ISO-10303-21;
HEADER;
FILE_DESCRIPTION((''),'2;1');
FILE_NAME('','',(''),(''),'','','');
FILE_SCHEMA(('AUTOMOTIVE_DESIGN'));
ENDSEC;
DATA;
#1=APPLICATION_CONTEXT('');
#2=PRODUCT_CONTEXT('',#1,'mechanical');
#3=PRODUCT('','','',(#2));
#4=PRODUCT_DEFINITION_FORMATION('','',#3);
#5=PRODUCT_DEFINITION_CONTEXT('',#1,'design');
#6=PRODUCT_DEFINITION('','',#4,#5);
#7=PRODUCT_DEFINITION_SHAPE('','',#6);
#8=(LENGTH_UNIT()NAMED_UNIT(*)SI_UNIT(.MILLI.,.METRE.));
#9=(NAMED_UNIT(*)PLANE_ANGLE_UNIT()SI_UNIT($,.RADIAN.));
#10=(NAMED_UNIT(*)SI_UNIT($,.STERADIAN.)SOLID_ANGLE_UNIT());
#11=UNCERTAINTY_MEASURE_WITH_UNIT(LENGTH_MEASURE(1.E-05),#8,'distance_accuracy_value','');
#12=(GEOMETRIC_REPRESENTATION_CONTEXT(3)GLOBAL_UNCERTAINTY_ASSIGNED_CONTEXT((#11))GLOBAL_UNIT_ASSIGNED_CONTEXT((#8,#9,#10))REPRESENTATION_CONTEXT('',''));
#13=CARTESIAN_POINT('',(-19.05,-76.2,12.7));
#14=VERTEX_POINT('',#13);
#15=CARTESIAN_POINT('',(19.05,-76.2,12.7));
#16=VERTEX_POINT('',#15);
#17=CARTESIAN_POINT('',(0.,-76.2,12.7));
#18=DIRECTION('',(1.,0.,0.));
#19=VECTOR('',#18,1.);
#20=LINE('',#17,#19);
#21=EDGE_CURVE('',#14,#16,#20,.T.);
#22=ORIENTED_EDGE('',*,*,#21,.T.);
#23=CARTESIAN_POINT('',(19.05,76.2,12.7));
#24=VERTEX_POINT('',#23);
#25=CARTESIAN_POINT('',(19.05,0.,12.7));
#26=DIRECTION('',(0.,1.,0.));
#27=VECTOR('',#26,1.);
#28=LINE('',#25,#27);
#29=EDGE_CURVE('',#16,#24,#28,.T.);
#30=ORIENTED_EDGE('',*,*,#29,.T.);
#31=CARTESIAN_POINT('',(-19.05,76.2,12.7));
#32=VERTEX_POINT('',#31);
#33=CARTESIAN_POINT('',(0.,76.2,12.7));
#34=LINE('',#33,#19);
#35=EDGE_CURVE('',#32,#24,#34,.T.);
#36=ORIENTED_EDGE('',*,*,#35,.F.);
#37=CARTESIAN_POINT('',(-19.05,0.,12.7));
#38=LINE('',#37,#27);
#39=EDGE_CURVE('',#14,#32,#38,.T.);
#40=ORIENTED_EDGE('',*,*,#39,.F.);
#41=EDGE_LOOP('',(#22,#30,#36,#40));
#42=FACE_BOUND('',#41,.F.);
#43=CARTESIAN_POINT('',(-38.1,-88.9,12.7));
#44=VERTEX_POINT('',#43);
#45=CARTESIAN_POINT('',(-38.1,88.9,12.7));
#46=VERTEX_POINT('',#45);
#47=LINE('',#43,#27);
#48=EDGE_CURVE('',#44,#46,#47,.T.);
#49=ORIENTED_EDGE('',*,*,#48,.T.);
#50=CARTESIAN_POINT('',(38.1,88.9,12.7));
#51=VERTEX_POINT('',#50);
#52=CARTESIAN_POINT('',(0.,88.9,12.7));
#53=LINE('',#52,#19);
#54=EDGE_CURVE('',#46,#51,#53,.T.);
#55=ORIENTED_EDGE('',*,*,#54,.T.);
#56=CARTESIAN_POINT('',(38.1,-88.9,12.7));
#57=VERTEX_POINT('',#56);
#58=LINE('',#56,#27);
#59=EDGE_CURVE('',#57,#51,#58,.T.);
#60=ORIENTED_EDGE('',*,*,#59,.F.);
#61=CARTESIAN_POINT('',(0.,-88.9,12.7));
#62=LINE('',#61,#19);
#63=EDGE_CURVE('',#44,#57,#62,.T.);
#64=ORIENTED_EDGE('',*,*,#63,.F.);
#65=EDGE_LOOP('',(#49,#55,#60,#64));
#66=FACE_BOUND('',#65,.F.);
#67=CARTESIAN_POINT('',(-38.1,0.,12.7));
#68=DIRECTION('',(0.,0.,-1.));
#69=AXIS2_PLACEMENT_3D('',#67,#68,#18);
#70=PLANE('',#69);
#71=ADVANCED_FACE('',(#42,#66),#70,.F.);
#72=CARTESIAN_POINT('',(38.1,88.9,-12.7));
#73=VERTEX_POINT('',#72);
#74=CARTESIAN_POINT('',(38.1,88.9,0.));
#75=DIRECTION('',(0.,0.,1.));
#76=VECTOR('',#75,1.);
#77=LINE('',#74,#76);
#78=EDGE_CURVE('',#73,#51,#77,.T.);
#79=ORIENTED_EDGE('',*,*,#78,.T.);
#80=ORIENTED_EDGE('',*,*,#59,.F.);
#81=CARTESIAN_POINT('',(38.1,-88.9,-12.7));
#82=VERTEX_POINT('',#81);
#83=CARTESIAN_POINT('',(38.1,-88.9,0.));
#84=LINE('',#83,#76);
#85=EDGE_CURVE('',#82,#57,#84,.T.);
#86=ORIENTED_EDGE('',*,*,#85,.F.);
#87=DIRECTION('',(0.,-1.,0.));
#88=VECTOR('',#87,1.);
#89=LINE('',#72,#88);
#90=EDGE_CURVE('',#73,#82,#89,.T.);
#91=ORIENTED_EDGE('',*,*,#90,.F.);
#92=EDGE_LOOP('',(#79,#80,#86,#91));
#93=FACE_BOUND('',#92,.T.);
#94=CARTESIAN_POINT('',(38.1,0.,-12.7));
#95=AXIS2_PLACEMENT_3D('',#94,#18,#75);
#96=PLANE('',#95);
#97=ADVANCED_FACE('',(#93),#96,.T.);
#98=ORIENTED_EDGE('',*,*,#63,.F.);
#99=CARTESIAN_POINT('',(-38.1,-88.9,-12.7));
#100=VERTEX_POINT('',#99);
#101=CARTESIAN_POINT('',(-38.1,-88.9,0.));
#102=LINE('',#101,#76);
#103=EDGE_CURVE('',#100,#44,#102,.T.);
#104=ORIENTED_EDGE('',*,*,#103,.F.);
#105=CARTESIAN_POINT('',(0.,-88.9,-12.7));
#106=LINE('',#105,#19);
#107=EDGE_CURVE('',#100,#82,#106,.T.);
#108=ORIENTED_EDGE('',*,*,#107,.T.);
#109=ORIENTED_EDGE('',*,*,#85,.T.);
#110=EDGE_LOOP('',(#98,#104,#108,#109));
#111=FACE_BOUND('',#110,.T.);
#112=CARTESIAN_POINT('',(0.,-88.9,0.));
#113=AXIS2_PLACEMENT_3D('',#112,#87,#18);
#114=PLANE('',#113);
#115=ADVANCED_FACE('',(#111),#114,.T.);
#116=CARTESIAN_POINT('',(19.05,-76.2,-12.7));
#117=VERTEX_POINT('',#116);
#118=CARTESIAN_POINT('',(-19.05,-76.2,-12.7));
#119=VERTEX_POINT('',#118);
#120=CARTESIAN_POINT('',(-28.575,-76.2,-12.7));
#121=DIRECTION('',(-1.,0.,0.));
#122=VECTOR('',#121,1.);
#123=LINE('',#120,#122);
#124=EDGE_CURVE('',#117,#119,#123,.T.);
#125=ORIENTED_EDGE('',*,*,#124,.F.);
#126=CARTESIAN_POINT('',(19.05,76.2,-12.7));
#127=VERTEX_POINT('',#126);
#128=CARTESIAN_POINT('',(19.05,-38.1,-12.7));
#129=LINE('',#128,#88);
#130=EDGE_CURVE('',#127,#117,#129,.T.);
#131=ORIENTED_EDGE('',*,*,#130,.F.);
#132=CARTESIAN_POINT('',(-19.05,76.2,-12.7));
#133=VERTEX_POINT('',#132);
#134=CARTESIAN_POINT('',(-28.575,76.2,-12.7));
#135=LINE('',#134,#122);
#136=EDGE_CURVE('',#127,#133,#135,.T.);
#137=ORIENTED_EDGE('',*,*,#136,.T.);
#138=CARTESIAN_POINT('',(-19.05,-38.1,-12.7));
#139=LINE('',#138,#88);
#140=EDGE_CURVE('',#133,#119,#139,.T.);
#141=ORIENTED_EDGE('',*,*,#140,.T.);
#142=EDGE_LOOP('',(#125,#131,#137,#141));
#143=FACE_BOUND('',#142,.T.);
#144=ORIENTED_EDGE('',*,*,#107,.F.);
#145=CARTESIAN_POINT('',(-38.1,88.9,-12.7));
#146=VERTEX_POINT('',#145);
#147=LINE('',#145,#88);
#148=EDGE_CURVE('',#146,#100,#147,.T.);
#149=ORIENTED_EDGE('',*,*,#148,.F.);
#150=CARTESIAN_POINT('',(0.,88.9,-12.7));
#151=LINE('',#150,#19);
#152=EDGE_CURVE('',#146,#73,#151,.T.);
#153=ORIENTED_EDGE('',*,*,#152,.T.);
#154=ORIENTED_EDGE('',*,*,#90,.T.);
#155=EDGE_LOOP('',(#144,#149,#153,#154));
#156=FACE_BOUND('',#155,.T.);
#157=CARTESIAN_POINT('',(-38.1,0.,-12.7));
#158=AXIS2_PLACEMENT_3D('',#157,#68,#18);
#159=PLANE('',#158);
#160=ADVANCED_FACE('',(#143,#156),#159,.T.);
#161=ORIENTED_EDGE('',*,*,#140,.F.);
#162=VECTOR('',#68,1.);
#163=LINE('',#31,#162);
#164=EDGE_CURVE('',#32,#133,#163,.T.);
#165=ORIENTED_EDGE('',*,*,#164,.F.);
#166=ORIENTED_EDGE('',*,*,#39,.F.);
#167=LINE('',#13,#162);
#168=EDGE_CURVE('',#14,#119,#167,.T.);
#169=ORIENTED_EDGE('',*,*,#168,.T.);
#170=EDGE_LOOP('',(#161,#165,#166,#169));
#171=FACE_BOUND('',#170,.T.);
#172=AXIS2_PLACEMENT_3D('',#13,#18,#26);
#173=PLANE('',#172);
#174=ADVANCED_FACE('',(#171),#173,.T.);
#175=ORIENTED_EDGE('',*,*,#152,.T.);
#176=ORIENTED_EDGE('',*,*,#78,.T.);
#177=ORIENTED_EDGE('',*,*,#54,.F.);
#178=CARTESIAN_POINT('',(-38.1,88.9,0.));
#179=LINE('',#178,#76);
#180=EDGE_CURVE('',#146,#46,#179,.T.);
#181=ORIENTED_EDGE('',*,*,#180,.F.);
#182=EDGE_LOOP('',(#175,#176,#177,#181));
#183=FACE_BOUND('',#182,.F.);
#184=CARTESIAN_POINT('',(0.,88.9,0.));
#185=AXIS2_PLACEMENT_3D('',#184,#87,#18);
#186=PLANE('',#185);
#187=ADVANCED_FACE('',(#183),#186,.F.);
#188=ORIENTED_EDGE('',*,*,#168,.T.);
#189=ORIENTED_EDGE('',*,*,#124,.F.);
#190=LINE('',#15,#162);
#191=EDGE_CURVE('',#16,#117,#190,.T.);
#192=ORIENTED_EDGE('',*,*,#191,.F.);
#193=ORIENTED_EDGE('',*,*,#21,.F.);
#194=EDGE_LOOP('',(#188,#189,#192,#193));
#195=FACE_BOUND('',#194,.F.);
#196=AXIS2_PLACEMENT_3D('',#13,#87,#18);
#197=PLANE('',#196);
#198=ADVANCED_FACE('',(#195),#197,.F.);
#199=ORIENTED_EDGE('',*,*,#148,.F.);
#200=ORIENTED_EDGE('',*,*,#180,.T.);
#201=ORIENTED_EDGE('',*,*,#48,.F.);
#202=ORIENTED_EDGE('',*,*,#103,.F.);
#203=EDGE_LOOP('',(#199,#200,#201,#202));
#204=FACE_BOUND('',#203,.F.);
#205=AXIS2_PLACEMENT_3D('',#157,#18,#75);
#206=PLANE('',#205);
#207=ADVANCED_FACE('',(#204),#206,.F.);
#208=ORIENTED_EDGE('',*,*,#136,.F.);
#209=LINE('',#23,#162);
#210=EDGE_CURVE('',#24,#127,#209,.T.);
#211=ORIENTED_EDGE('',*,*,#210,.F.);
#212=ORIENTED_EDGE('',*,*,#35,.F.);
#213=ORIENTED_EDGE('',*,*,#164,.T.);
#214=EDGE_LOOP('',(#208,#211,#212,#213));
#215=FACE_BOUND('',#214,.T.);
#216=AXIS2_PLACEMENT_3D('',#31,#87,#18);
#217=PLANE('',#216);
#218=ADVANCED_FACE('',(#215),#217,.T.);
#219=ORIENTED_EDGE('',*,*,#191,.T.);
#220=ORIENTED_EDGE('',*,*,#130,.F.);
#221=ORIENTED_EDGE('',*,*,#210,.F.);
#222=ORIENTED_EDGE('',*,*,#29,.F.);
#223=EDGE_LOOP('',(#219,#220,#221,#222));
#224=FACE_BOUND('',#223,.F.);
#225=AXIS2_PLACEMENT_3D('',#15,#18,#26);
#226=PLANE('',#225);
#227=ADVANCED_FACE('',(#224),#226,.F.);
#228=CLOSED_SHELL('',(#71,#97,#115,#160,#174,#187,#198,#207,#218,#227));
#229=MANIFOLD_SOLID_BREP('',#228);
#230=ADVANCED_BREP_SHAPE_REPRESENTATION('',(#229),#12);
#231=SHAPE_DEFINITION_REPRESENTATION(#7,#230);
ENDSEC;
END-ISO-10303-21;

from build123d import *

# Parameters (mm, degrees)
F0_W     = 76.2
F0_H     = 25.4
F1_DEPTH = 88.9
F2_W     = 38.1
F2_H     = 152.4
F3_DEPTH = 38.1


# Not quite as in the source:
# - a feature of the source that left no trace in its solid (it failed there, or was rolled back) is left out


with BuildPart() as f1:
    # F0 (on Front) → F1 (new body, symmetric)
    with BuildSketch(Plane.XZ):
        Rectangle(F0_W, F0_H)
    extrude(amount=F1_DEPTH, both=True)

    # F2 (on face) → F3 (cut)
    with BuildSketch(Plane.XY.offset(12.7)):
        Rectangle(F2_W, F2_H)
    extrude(amount=-F3_DEPTH, mode=Mode.SUBTRACT)


solid = f1.part
